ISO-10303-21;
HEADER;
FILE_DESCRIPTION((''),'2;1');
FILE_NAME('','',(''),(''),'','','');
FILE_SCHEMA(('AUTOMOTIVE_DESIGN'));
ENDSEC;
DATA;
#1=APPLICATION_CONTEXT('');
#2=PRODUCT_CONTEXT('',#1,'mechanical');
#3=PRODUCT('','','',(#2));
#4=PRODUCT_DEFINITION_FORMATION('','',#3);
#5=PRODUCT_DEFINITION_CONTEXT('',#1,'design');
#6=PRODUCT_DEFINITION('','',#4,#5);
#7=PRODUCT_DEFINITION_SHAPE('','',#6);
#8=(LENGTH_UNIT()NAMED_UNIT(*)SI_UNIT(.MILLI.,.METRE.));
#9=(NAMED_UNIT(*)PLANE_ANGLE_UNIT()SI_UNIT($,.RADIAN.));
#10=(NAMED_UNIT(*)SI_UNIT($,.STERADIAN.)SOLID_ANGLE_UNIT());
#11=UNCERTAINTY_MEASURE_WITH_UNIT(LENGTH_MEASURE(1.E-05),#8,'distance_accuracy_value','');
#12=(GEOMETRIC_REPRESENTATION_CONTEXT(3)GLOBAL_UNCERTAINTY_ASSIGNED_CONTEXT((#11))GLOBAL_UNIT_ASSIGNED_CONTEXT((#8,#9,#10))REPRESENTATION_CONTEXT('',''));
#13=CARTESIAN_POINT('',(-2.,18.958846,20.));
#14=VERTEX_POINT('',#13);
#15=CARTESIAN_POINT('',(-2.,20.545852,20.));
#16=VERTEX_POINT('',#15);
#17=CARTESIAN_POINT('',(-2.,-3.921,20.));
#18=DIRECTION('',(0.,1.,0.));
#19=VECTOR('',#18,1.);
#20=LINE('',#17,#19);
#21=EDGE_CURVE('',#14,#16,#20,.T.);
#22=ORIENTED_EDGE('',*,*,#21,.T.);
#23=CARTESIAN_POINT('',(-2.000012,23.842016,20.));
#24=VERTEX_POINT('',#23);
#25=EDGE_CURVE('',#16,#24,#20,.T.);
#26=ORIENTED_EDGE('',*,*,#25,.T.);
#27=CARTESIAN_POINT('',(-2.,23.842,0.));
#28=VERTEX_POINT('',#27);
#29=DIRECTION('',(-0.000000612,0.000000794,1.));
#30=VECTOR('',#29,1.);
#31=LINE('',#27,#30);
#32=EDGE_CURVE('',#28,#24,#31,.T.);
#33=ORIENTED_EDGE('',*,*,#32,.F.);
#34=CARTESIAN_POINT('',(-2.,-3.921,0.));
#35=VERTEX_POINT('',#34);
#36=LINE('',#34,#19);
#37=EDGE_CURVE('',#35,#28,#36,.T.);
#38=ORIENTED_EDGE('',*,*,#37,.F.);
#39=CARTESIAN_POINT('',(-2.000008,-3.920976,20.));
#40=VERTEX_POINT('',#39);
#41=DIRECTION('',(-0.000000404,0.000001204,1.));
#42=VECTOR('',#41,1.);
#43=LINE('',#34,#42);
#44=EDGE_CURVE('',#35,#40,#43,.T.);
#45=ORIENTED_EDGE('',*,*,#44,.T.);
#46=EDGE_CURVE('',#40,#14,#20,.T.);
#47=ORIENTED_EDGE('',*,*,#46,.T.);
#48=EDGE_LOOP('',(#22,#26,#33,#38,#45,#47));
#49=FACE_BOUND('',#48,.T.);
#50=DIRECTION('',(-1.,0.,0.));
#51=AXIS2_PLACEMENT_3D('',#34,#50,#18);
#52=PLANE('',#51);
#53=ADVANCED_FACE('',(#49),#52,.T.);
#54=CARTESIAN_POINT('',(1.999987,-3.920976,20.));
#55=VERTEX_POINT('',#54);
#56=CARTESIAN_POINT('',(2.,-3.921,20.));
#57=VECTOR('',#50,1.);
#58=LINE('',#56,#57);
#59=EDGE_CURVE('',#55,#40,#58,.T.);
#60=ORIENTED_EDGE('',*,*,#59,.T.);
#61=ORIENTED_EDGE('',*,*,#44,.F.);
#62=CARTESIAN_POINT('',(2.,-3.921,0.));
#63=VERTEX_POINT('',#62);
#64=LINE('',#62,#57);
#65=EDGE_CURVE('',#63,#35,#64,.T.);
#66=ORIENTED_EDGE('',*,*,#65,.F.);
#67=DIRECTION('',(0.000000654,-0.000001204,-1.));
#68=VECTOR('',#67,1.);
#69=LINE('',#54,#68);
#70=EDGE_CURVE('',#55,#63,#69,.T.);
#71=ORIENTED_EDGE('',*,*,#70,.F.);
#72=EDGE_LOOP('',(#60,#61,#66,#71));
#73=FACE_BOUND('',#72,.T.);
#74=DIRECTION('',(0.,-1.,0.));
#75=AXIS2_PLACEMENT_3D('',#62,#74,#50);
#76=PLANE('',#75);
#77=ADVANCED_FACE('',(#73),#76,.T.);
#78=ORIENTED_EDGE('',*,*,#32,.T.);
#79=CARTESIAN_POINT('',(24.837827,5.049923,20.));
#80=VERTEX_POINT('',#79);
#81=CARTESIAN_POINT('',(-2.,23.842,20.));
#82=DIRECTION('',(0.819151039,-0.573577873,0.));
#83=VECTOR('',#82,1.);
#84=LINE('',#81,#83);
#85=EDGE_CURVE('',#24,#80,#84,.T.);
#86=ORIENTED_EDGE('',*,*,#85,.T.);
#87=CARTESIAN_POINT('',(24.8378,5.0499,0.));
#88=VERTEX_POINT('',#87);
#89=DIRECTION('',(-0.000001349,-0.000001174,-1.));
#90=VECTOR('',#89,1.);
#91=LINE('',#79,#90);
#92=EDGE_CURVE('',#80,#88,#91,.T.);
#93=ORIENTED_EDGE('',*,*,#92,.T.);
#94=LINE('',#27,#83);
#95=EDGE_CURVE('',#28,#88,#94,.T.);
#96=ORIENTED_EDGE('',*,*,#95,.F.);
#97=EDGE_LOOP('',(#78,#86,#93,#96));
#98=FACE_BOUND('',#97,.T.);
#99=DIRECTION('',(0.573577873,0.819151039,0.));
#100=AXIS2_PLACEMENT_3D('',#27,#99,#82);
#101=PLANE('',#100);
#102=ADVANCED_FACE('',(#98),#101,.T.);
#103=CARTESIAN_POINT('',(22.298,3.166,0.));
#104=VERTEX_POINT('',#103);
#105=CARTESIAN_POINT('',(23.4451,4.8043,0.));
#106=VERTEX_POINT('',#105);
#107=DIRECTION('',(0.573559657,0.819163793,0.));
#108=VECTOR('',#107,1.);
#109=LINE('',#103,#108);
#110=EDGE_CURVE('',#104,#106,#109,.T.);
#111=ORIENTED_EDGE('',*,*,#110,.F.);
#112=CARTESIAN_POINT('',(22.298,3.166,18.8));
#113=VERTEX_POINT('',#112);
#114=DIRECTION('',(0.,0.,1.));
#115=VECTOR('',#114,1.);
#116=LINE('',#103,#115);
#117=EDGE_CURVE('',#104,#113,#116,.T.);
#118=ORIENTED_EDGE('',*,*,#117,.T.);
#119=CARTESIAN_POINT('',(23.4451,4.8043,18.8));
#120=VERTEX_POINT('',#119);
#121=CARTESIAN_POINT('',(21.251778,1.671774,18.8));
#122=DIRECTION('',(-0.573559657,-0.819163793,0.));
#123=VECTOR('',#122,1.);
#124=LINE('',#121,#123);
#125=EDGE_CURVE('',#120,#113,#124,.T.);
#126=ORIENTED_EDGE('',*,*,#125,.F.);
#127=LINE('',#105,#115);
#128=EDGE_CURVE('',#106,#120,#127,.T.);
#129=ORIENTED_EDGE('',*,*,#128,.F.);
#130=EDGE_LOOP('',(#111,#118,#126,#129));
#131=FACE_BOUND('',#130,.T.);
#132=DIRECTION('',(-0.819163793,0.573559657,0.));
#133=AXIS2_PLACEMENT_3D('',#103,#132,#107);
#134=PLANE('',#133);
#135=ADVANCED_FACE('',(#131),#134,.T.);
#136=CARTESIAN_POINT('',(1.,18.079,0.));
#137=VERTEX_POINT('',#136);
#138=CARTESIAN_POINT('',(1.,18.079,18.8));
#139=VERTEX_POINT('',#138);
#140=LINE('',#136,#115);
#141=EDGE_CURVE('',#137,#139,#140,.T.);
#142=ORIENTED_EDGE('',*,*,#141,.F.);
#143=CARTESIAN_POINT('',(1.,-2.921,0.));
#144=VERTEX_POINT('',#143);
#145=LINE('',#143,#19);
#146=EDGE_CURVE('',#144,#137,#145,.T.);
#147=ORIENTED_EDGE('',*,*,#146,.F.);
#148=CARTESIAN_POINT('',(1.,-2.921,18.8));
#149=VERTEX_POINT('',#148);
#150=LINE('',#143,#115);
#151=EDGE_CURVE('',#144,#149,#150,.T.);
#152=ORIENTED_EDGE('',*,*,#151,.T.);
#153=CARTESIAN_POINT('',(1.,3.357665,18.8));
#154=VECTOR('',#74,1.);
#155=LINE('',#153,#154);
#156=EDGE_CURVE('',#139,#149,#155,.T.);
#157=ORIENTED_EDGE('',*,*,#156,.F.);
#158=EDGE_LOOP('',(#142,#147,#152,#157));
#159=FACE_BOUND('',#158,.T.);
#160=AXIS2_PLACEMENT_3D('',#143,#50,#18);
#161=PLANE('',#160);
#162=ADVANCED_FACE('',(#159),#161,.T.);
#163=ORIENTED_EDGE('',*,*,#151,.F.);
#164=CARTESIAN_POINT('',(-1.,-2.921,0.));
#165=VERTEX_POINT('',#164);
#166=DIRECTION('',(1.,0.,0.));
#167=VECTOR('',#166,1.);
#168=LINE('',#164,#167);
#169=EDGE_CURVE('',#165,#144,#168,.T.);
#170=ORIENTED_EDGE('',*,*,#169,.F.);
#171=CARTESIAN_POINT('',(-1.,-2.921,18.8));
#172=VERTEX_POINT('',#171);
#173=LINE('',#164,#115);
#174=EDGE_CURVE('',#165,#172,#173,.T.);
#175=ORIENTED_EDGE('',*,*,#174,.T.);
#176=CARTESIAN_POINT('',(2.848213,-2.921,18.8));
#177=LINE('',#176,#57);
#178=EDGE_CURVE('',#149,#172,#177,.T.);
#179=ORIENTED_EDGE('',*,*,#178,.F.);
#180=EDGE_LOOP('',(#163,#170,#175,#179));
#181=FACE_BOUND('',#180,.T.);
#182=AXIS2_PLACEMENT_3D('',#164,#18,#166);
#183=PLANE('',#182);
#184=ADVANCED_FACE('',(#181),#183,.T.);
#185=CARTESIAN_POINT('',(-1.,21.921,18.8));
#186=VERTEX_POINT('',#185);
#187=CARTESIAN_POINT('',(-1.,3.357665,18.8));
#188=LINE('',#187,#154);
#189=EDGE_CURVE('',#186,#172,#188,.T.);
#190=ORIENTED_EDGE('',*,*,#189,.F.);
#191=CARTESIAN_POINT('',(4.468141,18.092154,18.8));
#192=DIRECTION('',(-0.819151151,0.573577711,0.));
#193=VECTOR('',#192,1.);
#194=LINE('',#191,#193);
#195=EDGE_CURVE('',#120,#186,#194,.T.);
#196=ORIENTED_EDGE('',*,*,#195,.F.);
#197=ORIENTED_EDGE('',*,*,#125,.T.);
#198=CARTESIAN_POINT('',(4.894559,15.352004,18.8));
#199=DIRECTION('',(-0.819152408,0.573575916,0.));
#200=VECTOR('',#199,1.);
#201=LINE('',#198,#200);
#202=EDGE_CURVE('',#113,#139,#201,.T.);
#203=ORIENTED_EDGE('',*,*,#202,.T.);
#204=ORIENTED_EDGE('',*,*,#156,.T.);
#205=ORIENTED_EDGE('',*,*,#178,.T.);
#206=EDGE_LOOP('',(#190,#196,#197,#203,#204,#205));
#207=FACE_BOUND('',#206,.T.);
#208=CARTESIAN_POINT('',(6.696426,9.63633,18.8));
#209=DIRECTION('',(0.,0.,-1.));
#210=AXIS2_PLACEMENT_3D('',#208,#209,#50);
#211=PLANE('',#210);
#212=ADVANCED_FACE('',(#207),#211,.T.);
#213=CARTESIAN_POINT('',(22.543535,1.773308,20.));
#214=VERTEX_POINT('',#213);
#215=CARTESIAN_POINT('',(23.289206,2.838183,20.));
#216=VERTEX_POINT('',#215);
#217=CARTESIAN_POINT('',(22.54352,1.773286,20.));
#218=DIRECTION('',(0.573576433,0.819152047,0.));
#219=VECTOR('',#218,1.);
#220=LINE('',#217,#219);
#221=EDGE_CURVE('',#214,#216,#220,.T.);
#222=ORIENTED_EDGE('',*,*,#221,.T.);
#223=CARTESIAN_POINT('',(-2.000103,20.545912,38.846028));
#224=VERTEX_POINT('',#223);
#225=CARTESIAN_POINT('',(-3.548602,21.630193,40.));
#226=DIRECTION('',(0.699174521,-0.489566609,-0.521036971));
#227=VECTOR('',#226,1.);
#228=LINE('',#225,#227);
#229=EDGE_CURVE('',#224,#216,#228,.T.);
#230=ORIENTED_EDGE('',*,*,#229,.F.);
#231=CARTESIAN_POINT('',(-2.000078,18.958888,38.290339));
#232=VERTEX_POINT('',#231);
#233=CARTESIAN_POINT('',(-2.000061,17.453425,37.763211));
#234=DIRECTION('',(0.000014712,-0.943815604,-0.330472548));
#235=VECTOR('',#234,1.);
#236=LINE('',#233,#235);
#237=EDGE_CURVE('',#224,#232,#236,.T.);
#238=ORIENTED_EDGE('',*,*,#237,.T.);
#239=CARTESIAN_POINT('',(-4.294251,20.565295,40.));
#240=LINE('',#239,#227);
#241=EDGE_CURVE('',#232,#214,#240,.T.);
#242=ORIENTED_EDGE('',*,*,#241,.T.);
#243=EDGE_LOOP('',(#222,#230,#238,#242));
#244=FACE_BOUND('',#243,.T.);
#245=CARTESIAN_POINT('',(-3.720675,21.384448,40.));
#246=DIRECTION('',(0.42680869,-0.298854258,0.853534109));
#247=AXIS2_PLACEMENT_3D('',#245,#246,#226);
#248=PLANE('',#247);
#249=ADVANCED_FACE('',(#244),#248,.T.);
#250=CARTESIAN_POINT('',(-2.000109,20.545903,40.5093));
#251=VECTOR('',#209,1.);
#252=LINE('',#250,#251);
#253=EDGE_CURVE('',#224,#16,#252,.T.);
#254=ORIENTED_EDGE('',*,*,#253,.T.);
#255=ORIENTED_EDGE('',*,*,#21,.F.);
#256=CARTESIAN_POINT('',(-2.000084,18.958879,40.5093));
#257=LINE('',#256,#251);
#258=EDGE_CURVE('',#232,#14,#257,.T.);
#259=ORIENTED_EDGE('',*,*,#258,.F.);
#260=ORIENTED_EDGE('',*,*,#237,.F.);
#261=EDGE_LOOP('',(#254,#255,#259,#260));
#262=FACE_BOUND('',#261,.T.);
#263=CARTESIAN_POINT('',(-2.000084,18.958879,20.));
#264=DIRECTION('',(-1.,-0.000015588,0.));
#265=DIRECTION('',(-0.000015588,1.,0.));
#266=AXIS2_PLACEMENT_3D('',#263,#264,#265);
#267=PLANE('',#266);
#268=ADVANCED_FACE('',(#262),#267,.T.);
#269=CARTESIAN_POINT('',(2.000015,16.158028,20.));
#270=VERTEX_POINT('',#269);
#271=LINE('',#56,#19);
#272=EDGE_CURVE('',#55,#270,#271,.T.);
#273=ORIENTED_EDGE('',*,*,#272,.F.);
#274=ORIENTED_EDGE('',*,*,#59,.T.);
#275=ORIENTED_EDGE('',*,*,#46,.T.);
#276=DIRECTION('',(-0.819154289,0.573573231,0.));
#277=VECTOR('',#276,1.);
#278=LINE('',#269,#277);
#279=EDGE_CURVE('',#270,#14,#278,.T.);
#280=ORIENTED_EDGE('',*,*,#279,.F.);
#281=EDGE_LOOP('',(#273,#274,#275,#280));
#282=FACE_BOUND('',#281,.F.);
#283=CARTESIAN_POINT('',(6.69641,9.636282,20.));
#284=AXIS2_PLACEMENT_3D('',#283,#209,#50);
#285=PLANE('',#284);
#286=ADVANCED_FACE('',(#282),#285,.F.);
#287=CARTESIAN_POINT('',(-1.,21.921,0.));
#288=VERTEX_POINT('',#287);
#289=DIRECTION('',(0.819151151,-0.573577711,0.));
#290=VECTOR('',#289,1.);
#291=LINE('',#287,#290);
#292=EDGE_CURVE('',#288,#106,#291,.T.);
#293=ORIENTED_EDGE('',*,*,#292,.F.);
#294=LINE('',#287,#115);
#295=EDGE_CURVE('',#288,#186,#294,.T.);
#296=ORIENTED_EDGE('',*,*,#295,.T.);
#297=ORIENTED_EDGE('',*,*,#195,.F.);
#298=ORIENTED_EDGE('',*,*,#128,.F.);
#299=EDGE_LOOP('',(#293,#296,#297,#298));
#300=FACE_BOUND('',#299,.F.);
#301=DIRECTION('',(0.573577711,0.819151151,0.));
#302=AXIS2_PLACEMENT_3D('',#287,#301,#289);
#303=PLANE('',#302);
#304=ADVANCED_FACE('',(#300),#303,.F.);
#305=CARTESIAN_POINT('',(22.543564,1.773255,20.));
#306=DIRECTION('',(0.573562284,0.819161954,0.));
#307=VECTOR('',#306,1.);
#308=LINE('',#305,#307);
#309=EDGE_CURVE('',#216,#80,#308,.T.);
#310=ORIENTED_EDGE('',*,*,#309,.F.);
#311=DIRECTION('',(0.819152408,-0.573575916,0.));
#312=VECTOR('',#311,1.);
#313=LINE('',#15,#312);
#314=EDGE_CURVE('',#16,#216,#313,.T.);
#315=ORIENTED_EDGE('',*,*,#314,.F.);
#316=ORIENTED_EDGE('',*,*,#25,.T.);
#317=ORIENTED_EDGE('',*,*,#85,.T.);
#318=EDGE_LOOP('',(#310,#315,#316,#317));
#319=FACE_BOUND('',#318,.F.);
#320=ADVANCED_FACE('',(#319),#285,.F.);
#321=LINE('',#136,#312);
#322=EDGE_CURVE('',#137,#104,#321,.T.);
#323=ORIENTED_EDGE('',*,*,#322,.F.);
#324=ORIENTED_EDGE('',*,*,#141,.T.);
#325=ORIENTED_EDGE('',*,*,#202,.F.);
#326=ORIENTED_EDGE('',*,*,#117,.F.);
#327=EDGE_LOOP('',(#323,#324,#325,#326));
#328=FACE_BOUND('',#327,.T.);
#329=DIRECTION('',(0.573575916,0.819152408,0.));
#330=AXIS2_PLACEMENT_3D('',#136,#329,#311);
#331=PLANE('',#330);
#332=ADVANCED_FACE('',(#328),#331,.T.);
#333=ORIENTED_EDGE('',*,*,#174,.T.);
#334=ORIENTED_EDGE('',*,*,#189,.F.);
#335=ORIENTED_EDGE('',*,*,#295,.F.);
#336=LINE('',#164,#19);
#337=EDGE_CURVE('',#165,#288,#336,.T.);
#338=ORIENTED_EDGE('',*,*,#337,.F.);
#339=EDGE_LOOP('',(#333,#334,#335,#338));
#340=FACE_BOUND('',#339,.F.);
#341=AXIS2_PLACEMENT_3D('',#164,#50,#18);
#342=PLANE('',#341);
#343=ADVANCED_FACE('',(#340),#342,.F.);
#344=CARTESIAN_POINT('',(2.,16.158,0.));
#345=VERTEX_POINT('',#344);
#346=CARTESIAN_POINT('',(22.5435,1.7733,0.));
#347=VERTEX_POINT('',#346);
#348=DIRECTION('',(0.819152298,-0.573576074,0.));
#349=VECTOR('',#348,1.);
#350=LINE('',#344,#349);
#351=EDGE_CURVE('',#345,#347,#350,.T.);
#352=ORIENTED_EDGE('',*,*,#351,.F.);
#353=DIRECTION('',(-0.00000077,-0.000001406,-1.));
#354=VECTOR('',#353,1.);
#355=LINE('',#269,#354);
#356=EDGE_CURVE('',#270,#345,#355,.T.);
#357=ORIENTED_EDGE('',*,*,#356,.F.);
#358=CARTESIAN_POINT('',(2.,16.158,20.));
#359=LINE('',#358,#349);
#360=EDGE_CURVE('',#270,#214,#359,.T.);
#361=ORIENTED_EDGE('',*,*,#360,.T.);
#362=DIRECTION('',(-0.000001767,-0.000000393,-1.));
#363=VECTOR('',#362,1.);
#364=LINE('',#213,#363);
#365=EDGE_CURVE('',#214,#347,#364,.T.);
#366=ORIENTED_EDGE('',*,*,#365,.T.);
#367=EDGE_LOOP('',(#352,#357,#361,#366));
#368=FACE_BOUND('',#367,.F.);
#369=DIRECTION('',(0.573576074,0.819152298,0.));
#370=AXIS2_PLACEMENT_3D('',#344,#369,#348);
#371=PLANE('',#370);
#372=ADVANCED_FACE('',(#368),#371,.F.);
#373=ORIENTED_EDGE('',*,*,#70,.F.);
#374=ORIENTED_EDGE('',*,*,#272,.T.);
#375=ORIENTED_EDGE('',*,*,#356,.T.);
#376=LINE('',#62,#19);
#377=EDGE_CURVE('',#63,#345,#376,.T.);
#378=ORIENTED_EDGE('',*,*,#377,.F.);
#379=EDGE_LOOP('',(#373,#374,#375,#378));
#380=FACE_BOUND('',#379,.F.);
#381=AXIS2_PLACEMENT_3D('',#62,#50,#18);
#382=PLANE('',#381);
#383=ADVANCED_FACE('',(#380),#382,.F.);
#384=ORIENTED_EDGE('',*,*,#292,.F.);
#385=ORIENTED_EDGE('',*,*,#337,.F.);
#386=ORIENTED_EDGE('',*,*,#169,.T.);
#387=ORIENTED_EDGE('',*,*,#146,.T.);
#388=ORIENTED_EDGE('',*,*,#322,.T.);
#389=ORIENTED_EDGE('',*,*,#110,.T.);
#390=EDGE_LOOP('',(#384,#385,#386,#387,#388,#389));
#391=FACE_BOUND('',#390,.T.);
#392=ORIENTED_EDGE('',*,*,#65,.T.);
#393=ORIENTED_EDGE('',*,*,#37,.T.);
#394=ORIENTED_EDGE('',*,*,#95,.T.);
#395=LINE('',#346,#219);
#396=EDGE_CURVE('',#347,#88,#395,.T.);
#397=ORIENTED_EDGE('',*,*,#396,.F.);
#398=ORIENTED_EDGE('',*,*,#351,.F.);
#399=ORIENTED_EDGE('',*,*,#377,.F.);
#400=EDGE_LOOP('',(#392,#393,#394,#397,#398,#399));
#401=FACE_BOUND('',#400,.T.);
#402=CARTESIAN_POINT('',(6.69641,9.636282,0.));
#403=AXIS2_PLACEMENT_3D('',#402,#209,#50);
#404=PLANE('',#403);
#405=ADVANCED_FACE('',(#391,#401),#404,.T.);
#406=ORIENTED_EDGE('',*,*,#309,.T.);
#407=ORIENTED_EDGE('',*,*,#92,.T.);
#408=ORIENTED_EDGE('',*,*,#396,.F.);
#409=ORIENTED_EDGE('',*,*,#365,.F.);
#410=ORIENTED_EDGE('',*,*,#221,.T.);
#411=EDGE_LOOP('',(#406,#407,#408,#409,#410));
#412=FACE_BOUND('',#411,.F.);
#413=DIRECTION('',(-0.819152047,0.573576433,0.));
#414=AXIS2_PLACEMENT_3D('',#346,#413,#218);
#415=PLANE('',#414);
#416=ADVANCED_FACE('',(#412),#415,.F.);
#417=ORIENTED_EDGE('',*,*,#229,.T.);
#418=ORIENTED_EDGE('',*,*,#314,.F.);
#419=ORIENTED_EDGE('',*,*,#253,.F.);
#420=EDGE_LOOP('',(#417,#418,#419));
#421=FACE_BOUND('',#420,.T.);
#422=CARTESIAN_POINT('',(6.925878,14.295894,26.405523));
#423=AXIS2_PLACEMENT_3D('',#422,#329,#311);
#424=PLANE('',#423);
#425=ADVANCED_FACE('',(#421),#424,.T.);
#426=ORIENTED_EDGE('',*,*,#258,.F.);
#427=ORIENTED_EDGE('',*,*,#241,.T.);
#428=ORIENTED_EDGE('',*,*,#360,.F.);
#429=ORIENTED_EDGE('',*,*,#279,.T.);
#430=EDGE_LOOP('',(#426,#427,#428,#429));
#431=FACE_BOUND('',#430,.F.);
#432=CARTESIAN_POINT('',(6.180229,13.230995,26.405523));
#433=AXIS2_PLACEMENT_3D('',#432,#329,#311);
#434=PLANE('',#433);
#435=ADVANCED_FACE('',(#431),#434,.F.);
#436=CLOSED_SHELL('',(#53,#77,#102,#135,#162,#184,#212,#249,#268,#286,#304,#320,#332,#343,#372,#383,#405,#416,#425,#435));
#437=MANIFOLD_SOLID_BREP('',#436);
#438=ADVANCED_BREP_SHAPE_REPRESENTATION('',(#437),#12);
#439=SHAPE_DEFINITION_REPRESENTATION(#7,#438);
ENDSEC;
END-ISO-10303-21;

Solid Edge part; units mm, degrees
sketch "Sketch1" plane through (0, 0, 0) normal (0, 0, 1) x (1, 0, 0)
  line L0 (-1, 21.921) -> (23.4451, 4.8043)
  line L1 (22.298, 3.166) -> (23.4451, 4.8043)
  line L2 (1, 18.079) -> (22.298, 3.166)
  line L3 (1, -2.921) -> (1, 18.079)
  line L4 (-1, -2.921) -> (1, -2.921)
  line L5 (-1, -2.921) -> (-1, 21.921)
  line L6 (-2, 23.842) -> (24.8378, 5.0499)
  line L7 (22.5435, 1.7733) -> (24.8378, 5.0499)
  line L8 (2, 16.158) -> (22.5435, 1.7733)
  line L9 (2, -3.921) -> (2, 16.158)
  line L10 (2, -3.921) -> (-2, -3.921)
  line L11 (-2, -3.921) -> (-2, 23.842)
  dimension "D1" = 2
  dimension "D2" = 1
  dimension "D3" = 1
  dimension "D4" = 1
  dimension "D5" = 1.3927
extrude "Protrusion1" add sketch "Sketch1" along normal blind 20
sketch "Sketch2" plane through (11.649, 10.6225, 10) normal (0.5735764, 0.819152, 0) x (0.819152, -0.5735764, 0)
  line L0 (-18.7629, -30) -> (14, -10)
  line L1 (14, -10) -> (-18.7629, -10)
  line L2 (-18.7629, -10) -> (-18.7629, -30)
extrude "ProtrusioneEstrusa_4" add sketch "Sketch2" against normal up to vertex (1 mm away) and the other way blind 0.3
sketch "Sketch3" plane through (11.4189, 13.3401, 20) normal (0, 0, 1) x (-0.819152, 0.5735764, 0)
  line L0 (-15.7472, -0.9059) -> (-15.7472, 3.0941)
  line L1 (-15.7472, 3.0941) -> (9.3318, 3.0941)
  line L2 (9.3318, 3.0941) -> (-2.185, 19.5419)
  line L3 (-2.185, 19.5419) -> (1.0916, 21.8362)
  line L4 (1.0916, 21.8362) -> (17.0158, -0.9059)
  line L5 (17.0158, -0.9059) -> (-15.7472, -0.9059)
extrude "ProtrusioneEstrusa_5" add sketch "Sketch3" against normal blind 1.2
sketch "Sketch4" plane through (-3.1472, 20.2946, 20) normal (0, 0, -1) x (-0.819152, 0.5735764, 0)
  line L0 (-0.7955, 0.8638) -> (1.095, 0.8638)
  line L1 (1.095, 0.8638) -> (1.095, -0.4362)
  line L2 (1.095, -0.4362) -> (-1.7058, -0.4362)
  line L3 (-1.7058, -0.4362) -> (-0.7955, 0.8638)
extrude "ScavoEstrusione_3" cut sketch "Sketch4" against normal blind 20.5093 and the other way blind 1.027
